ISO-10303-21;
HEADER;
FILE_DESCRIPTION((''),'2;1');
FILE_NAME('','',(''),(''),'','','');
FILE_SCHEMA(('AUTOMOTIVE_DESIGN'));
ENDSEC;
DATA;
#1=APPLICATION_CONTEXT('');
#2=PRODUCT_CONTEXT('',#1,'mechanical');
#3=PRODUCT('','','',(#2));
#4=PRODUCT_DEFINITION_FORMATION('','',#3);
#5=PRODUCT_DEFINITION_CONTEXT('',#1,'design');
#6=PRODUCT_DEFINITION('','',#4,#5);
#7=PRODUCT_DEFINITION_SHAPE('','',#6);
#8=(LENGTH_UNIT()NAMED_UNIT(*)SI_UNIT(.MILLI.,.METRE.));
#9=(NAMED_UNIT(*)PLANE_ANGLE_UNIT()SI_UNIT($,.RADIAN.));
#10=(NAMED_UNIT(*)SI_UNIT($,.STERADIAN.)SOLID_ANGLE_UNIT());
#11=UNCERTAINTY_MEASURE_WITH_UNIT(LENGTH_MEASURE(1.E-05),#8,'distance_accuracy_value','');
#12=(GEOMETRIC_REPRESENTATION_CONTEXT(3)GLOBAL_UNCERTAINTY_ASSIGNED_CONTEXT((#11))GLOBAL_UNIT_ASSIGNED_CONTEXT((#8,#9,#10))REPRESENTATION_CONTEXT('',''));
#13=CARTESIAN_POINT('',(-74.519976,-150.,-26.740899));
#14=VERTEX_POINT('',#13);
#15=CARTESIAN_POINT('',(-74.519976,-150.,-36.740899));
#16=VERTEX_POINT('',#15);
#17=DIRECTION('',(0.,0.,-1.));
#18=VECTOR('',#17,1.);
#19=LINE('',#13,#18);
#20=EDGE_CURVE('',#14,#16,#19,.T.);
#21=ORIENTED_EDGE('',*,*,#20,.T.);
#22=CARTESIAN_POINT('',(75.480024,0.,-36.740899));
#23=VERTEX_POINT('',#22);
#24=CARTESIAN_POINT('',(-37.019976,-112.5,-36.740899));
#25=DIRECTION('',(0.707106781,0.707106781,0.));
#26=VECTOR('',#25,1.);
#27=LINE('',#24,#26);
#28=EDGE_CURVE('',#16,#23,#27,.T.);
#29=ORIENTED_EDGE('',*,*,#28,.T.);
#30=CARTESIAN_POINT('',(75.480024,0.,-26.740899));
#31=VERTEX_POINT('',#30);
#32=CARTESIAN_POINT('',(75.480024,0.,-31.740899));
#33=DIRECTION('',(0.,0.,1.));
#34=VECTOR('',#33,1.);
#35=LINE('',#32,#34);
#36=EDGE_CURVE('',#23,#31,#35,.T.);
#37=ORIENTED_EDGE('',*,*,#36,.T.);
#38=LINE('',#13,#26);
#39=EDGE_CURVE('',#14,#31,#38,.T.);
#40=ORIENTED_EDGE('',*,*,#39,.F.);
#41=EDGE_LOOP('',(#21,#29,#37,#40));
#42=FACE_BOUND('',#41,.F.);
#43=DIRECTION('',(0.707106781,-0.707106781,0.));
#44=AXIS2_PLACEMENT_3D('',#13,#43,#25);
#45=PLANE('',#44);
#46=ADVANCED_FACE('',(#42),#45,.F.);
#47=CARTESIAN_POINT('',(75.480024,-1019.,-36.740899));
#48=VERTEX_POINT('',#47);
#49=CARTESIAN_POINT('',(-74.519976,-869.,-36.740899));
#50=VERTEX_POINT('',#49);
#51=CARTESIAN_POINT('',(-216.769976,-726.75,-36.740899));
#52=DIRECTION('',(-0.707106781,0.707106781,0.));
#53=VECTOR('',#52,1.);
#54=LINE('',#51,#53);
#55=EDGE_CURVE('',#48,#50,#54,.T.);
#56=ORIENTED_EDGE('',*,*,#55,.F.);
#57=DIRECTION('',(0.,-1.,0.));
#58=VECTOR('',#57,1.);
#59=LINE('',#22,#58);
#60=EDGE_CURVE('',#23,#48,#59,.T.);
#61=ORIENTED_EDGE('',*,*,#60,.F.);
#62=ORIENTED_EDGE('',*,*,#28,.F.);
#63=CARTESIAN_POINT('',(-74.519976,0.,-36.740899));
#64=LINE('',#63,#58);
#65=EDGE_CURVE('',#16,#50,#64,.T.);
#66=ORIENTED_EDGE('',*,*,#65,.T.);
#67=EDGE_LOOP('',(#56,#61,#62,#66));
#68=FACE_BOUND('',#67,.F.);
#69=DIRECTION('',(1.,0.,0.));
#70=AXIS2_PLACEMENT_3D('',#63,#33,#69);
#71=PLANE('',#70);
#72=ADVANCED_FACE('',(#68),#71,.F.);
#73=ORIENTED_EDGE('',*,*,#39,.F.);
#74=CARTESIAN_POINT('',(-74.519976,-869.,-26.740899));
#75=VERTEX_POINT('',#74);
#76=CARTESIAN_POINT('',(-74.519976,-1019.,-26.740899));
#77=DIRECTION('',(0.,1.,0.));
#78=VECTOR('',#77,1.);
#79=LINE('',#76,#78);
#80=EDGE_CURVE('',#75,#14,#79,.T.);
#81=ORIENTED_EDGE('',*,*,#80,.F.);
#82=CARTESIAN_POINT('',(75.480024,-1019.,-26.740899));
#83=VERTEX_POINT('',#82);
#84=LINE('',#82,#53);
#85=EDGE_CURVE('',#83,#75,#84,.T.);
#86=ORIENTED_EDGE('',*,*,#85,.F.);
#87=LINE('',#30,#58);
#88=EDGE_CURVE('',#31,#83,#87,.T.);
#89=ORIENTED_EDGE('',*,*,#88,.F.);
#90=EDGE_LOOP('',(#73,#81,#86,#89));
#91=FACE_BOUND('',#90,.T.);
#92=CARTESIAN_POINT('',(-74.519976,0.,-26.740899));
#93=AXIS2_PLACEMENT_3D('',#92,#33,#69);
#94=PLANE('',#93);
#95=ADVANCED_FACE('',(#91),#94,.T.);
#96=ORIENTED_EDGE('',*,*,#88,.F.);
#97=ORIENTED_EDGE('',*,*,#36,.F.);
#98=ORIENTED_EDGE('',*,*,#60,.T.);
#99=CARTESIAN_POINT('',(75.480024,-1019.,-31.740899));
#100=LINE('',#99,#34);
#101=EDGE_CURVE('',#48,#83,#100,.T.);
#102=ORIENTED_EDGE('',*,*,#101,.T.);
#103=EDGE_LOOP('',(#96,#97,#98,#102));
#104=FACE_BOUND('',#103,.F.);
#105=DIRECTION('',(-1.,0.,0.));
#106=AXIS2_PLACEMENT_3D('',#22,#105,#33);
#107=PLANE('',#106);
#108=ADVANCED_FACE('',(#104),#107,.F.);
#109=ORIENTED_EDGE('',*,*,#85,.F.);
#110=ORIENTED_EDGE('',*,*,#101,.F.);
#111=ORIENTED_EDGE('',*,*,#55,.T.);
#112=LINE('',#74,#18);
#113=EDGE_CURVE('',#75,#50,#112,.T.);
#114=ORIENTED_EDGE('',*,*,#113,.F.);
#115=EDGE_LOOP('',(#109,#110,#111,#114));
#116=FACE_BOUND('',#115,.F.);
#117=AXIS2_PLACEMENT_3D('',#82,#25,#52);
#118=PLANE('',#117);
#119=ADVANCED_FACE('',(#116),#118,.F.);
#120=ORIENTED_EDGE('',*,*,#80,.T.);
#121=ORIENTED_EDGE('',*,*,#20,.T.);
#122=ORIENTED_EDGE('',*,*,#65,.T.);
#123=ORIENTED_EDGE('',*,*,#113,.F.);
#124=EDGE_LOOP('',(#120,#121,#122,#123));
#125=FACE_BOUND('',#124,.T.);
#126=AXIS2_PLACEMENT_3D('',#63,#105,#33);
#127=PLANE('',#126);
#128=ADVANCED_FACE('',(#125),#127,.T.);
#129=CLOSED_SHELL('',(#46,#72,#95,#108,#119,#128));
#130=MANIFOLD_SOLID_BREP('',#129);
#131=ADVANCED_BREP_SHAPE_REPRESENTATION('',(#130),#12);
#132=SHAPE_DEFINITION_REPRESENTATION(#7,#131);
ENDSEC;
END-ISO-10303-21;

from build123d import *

# Parameters (mm, degrees)
F0_W          = 150
F0_H          = 10
F1_DEPTH      = 1019
F3_DEPTH      = 10.001
F3_DEPTH_BACK = 1540
F5_DEPTH      = 1577
F5_DEPTH_BACK = 10.001


# Not quite as in the source:
# - an extrude ends at something that could not be found from the text; its depth is read off the source's solid


with BuildPart() as f1:
    # F0 (on Front) → F1 (new body)
    with BuildSketch(Plane.XZ):
        with Locations((0.4800241441, -31.7408985884)):
            Rectangle(F0_W, F0_H)
    extrude(amount=F1_DEPTH)

    # F2 (on face) → F3 (cut, two sides)
    with BuildSketch(Plane.XY.offset(-26.7408985884)) as f3_sk:
        Polygon((-74.5199758559, -150), (75.4800241441, 0), (178.0070960522, 169.0949052572), (-164.1357541084, 159.836769104), (-164.1357541084, -150), (-107.9861149192, -156.7480415106), align=None)
    extrude(amount=-F3_DEPTH, mode=Mode.SUBTRACT)
    extrude(f3_sk.sketch, amount=F3_DEPTH_BACK, mode=Mode.SUBTRACT)

    # F4 (on face) → F5 (cut, two sides)
    with BuildSketch(Plane.XY.offset(-26.7408985884)) as f5_sk:
        Polygon((72.7586299181, -1200.1620531082), (75.4800241441, -1019), (-74.5199758559, -869), (-237.236186862, -869), (-237.236186862, -1200.1620531082), align=None)
    extrude(amount=F5_DEPTH, mode=Mode.SUBTRACT)
    extrude(f5_sk.sketch, amount=-F5_DEPTH_BACK, mode=Mode.SUBTRACT)


solid = f1.part
